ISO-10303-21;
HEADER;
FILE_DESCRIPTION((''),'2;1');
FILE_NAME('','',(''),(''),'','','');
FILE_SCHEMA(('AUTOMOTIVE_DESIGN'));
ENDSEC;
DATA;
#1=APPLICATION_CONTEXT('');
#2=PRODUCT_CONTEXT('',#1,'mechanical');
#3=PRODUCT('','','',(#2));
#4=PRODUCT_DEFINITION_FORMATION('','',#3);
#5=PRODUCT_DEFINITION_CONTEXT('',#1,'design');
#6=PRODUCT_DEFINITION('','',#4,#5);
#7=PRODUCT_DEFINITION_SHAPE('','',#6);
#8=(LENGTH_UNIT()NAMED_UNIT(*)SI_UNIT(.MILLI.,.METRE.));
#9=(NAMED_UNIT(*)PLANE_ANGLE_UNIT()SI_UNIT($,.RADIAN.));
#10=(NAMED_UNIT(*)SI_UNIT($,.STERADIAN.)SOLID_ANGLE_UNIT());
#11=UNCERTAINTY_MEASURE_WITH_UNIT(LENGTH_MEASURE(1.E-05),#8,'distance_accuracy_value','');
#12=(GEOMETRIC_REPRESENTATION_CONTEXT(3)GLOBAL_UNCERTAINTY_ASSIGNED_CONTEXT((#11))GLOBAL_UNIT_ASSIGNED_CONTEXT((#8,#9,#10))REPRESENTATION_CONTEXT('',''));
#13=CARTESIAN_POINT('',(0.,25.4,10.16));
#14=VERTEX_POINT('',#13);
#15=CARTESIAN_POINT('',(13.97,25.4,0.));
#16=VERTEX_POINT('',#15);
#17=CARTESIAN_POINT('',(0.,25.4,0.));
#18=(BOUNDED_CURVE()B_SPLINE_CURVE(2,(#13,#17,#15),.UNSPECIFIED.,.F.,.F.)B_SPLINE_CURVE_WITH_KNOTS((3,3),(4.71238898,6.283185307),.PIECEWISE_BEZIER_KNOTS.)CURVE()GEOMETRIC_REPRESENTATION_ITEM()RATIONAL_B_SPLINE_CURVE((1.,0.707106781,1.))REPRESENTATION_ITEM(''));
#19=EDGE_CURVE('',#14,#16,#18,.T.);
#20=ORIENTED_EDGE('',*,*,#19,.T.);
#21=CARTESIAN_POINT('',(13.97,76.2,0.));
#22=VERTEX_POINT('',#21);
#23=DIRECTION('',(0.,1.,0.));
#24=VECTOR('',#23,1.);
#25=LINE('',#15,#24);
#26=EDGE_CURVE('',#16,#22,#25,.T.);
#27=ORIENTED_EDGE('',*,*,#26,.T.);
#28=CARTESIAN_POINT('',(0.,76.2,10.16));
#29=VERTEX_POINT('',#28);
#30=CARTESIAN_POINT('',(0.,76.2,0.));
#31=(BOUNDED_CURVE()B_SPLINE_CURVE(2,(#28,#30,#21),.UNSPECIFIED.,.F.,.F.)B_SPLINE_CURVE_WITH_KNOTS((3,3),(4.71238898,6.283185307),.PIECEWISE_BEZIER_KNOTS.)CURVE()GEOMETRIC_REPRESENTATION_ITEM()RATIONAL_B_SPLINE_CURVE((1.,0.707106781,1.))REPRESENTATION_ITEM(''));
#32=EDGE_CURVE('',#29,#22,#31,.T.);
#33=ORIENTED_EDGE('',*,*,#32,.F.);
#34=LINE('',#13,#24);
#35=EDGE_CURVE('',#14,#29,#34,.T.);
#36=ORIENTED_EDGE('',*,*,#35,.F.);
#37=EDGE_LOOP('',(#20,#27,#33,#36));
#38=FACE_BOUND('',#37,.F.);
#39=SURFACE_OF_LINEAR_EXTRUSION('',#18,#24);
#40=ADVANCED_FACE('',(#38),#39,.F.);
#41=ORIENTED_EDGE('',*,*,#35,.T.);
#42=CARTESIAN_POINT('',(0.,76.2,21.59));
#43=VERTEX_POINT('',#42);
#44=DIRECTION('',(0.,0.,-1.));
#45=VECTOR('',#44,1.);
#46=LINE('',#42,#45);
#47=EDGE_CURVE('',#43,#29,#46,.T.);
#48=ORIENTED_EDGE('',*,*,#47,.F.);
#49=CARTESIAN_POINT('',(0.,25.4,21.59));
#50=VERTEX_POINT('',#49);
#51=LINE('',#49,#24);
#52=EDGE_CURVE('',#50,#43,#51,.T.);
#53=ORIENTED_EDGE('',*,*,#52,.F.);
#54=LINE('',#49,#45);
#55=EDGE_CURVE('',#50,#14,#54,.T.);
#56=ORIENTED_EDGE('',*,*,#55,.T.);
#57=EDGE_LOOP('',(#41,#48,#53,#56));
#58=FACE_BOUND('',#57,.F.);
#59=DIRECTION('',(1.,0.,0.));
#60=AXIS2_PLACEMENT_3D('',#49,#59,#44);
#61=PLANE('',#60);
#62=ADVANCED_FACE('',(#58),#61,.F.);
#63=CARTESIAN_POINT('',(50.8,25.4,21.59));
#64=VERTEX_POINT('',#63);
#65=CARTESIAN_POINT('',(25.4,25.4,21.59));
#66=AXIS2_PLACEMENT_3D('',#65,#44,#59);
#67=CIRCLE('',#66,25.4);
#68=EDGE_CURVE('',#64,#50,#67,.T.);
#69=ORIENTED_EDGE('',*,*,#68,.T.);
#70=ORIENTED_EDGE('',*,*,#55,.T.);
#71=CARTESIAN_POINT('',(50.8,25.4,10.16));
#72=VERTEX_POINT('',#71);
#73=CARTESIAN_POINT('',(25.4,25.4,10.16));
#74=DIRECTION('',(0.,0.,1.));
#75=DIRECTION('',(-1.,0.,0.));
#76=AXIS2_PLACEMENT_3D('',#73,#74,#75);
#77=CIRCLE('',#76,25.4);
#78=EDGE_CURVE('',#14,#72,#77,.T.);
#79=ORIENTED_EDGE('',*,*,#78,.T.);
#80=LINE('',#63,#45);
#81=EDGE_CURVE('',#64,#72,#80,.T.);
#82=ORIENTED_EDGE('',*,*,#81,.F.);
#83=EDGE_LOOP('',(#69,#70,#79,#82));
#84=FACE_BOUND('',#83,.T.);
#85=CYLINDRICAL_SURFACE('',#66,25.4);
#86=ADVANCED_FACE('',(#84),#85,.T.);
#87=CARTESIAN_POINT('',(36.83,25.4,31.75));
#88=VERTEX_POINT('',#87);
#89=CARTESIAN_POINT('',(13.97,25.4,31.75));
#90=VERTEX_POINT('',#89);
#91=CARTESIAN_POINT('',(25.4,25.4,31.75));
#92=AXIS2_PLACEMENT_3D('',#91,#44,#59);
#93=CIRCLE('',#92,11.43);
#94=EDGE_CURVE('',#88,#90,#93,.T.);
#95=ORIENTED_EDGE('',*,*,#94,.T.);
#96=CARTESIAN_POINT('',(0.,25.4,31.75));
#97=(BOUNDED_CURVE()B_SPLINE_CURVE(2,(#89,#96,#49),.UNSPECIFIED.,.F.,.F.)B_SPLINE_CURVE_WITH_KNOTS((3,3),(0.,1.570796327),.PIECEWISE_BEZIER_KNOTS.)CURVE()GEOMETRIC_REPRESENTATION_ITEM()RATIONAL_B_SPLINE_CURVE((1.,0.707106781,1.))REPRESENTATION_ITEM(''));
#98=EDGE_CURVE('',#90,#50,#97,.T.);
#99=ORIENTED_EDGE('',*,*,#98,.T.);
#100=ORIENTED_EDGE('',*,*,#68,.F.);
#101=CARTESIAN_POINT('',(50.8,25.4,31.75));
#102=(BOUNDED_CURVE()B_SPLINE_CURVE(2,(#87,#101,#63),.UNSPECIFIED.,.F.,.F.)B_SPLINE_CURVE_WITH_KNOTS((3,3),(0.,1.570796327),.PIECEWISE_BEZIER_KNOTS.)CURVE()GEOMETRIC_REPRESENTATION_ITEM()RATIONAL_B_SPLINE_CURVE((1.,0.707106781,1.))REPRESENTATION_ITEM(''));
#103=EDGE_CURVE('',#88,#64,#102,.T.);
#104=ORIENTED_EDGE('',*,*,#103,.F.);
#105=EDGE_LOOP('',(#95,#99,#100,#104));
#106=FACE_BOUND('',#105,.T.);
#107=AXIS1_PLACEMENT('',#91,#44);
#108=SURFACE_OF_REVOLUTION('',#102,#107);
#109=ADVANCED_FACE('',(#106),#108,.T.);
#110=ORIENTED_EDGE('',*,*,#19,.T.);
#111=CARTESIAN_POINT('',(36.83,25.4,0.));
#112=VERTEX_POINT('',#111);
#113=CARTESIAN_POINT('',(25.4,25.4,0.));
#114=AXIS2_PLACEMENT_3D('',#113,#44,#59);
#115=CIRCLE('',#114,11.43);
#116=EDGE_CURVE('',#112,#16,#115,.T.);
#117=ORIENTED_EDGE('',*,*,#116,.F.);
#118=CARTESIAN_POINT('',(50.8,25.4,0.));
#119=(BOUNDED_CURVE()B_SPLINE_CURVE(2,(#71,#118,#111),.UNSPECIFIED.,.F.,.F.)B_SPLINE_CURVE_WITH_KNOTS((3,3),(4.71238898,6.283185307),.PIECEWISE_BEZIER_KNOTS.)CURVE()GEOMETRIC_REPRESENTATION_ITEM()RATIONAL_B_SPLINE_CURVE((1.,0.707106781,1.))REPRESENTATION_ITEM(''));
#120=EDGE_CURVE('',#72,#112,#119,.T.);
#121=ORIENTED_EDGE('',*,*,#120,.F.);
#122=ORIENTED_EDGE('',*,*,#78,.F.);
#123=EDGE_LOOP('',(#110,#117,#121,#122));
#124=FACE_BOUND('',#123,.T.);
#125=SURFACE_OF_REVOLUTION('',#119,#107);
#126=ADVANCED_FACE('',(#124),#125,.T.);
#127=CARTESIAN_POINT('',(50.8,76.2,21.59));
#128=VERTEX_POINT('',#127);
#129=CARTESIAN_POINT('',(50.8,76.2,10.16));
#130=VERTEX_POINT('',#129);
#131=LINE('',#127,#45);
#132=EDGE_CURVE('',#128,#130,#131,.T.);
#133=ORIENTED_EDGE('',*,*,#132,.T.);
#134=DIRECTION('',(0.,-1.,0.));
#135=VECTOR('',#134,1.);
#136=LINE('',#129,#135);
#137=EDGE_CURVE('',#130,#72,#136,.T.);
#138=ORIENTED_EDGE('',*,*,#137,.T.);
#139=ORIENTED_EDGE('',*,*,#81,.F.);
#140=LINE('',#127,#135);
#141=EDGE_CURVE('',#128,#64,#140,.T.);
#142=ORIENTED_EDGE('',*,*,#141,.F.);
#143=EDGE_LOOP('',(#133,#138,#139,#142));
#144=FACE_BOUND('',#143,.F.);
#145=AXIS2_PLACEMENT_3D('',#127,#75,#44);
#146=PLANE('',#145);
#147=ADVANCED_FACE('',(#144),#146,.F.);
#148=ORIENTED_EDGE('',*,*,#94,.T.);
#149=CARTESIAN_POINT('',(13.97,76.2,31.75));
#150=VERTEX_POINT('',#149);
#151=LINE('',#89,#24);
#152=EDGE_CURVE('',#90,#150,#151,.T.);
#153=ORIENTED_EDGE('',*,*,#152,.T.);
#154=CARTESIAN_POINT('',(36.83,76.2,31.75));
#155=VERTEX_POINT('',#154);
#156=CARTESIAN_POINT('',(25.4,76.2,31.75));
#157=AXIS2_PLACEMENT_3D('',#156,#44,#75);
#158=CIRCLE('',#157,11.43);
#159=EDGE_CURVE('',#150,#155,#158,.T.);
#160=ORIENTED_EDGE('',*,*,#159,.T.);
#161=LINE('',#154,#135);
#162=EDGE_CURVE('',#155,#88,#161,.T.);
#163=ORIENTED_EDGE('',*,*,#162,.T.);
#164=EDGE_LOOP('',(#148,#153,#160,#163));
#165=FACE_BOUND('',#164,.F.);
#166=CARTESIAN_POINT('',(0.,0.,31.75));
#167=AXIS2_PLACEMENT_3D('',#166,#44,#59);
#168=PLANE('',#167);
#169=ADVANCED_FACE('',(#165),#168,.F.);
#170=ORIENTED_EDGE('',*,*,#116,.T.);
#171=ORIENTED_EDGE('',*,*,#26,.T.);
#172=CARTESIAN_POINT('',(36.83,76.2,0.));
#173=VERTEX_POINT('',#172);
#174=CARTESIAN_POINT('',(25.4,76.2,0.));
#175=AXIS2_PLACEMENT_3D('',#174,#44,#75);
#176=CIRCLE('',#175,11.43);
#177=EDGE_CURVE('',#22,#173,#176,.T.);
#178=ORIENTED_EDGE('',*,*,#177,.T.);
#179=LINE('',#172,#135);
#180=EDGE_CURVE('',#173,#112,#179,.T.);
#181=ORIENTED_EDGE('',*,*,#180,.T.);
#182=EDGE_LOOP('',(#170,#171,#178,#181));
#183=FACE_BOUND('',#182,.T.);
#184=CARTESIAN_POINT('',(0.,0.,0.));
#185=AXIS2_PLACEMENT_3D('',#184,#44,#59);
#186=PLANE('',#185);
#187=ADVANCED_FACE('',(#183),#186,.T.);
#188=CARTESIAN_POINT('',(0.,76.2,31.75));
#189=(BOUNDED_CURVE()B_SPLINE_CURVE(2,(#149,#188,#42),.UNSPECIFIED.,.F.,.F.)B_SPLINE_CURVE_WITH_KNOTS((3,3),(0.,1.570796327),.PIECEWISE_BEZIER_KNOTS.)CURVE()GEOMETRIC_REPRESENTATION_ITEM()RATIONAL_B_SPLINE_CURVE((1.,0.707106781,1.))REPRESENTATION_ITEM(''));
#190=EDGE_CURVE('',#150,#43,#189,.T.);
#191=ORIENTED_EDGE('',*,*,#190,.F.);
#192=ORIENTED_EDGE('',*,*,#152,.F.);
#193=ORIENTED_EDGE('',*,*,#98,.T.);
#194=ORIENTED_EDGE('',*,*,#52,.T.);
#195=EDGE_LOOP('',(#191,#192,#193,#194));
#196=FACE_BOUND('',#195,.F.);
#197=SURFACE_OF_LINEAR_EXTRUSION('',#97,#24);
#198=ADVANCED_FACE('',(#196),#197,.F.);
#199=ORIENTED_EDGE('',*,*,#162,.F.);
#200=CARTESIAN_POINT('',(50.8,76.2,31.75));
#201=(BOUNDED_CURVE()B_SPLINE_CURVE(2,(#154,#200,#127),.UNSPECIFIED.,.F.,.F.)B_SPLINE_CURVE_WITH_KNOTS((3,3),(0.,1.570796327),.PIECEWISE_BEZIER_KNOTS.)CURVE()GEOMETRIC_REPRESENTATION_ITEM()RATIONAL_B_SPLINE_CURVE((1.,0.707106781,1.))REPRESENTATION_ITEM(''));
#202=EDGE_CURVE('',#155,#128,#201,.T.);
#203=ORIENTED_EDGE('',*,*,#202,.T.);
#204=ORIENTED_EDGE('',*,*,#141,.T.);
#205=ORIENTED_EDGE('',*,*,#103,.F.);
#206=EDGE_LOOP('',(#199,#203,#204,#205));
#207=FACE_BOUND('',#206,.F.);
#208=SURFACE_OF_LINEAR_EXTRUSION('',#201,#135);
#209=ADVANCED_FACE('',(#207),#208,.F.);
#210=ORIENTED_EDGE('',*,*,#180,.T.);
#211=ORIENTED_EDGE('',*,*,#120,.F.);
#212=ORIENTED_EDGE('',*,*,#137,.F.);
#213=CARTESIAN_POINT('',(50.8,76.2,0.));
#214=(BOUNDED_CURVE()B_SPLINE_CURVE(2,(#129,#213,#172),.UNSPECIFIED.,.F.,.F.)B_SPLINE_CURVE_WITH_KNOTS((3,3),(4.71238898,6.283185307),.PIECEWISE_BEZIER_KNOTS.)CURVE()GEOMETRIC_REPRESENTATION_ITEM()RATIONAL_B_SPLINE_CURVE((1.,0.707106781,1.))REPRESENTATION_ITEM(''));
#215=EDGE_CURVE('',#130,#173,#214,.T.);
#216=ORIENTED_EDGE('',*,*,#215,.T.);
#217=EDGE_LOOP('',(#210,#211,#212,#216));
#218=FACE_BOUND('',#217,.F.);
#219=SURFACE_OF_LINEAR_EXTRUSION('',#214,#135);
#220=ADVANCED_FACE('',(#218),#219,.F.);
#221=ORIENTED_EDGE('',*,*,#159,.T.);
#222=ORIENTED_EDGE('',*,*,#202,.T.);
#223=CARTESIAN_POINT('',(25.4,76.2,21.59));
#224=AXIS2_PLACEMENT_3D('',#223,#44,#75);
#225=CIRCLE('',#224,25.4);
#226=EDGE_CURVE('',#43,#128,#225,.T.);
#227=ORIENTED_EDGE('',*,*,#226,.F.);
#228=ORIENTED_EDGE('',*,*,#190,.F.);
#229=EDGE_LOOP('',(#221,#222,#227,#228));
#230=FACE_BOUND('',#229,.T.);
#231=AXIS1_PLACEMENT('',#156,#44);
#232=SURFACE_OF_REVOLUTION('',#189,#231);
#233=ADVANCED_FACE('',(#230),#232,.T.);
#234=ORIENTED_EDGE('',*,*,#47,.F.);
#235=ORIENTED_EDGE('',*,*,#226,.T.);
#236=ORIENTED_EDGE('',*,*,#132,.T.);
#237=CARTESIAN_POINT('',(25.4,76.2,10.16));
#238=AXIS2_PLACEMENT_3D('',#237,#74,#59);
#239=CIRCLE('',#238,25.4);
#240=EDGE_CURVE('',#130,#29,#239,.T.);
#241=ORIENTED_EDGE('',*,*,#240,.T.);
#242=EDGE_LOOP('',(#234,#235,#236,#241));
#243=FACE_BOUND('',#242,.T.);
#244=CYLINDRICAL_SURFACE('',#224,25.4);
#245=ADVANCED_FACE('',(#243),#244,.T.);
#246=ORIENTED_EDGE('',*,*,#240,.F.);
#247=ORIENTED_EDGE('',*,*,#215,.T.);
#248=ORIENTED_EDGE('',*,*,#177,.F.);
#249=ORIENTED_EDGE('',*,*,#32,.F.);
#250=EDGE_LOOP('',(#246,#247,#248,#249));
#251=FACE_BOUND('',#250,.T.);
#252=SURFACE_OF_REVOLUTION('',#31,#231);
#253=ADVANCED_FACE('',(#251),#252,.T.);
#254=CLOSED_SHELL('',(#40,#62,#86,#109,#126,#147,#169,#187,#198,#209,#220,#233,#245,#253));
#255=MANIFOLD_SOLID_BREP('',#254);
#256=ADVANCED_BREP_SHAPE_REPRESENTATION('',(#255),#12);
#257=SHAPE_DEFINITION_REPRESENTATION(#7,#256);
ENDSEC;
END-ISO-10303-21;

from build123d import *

# Parameters (mm, degrees)
F0_W     = 50.8
F0_H     = 31.75
F1_DEPTH = 101.6


# Not quite as in the source:
# - a feature names something its author has since deleted; it is built from what else it names
# - the program builds the solid bodies; features that only make, move or delete a surface that nothing else refers to are left out


with BuildPart() as f1:
    # F0 (on Front) → F1 (new body)
    with BuildSketch(Plane.XZ):
        with Locations((25.4, 15.875)):
            Rectangle(F0_W, F0_H)
    extrude(amount=-F1_DEPTH)

    # F5: sweep along a path in F2
    with BuildLine(Plane.XY.offset(31.75)) as f5_path:
        Line((50.8, 76.2), (50.8, 25.4))
        ThreePointArc((50.8, 25.4), (25.4, 0), (0, 25.4))
        Line((0, 25.4), (0, 76.2))
        ThreePointArc((0, 76.2), (25.4, 101.6), (50.8, 76.2))
    # F4 (on plane+point) → F5 (sweep, cut)
    with BuildSketch(Plane.XZ.offset(-25.4)):
        with BuildLine():
            Line((50.8, 21.59), (50.8, 31.75))
            Line((50.8, 31.75), (36.83, 31.75))
            add(Edge.make_bspline(
                [(50.8, 21.59), (50.8, 31.75), (36.83, 31.75)],
                knots=[0, 0, 0, 1.5707963268, 1.5707963268, 1.5707963268], degree=2, weights=[1, 0.7071067812, 1]))
        make_face()
        with BuildLine():
            Line((50.8, 0), (50.8, 10.16))
            add(Edge.make_bspline(
                [(36.83, 0), (50.8, 0), (50.8, 10.16)],
                knots=[4.7123889804, 4.7123889804, 4.7123889804, 6.2831853072, 6.2831853072, 6.2831853072], degree=2, weights=[1, 0.7071067812, 1]))
            Line((36.83, 0), (50.8, 0))
        make_face()
        Polygon((36.83, 31.75), (50.8, 31.75), (50.8, 21.59), (50.8, 10.16), (50.8, 0), (36.83, 0), (36.83, -19.05), (76.2, -19.05), (76.2, 10.16), (76.2, 21.59), (76.2, 50.8), (36.83, 50.8), align=None)
    sweep(path=f5_path.line, mode=Mode.SUBTRACT)


solid = f1.part
